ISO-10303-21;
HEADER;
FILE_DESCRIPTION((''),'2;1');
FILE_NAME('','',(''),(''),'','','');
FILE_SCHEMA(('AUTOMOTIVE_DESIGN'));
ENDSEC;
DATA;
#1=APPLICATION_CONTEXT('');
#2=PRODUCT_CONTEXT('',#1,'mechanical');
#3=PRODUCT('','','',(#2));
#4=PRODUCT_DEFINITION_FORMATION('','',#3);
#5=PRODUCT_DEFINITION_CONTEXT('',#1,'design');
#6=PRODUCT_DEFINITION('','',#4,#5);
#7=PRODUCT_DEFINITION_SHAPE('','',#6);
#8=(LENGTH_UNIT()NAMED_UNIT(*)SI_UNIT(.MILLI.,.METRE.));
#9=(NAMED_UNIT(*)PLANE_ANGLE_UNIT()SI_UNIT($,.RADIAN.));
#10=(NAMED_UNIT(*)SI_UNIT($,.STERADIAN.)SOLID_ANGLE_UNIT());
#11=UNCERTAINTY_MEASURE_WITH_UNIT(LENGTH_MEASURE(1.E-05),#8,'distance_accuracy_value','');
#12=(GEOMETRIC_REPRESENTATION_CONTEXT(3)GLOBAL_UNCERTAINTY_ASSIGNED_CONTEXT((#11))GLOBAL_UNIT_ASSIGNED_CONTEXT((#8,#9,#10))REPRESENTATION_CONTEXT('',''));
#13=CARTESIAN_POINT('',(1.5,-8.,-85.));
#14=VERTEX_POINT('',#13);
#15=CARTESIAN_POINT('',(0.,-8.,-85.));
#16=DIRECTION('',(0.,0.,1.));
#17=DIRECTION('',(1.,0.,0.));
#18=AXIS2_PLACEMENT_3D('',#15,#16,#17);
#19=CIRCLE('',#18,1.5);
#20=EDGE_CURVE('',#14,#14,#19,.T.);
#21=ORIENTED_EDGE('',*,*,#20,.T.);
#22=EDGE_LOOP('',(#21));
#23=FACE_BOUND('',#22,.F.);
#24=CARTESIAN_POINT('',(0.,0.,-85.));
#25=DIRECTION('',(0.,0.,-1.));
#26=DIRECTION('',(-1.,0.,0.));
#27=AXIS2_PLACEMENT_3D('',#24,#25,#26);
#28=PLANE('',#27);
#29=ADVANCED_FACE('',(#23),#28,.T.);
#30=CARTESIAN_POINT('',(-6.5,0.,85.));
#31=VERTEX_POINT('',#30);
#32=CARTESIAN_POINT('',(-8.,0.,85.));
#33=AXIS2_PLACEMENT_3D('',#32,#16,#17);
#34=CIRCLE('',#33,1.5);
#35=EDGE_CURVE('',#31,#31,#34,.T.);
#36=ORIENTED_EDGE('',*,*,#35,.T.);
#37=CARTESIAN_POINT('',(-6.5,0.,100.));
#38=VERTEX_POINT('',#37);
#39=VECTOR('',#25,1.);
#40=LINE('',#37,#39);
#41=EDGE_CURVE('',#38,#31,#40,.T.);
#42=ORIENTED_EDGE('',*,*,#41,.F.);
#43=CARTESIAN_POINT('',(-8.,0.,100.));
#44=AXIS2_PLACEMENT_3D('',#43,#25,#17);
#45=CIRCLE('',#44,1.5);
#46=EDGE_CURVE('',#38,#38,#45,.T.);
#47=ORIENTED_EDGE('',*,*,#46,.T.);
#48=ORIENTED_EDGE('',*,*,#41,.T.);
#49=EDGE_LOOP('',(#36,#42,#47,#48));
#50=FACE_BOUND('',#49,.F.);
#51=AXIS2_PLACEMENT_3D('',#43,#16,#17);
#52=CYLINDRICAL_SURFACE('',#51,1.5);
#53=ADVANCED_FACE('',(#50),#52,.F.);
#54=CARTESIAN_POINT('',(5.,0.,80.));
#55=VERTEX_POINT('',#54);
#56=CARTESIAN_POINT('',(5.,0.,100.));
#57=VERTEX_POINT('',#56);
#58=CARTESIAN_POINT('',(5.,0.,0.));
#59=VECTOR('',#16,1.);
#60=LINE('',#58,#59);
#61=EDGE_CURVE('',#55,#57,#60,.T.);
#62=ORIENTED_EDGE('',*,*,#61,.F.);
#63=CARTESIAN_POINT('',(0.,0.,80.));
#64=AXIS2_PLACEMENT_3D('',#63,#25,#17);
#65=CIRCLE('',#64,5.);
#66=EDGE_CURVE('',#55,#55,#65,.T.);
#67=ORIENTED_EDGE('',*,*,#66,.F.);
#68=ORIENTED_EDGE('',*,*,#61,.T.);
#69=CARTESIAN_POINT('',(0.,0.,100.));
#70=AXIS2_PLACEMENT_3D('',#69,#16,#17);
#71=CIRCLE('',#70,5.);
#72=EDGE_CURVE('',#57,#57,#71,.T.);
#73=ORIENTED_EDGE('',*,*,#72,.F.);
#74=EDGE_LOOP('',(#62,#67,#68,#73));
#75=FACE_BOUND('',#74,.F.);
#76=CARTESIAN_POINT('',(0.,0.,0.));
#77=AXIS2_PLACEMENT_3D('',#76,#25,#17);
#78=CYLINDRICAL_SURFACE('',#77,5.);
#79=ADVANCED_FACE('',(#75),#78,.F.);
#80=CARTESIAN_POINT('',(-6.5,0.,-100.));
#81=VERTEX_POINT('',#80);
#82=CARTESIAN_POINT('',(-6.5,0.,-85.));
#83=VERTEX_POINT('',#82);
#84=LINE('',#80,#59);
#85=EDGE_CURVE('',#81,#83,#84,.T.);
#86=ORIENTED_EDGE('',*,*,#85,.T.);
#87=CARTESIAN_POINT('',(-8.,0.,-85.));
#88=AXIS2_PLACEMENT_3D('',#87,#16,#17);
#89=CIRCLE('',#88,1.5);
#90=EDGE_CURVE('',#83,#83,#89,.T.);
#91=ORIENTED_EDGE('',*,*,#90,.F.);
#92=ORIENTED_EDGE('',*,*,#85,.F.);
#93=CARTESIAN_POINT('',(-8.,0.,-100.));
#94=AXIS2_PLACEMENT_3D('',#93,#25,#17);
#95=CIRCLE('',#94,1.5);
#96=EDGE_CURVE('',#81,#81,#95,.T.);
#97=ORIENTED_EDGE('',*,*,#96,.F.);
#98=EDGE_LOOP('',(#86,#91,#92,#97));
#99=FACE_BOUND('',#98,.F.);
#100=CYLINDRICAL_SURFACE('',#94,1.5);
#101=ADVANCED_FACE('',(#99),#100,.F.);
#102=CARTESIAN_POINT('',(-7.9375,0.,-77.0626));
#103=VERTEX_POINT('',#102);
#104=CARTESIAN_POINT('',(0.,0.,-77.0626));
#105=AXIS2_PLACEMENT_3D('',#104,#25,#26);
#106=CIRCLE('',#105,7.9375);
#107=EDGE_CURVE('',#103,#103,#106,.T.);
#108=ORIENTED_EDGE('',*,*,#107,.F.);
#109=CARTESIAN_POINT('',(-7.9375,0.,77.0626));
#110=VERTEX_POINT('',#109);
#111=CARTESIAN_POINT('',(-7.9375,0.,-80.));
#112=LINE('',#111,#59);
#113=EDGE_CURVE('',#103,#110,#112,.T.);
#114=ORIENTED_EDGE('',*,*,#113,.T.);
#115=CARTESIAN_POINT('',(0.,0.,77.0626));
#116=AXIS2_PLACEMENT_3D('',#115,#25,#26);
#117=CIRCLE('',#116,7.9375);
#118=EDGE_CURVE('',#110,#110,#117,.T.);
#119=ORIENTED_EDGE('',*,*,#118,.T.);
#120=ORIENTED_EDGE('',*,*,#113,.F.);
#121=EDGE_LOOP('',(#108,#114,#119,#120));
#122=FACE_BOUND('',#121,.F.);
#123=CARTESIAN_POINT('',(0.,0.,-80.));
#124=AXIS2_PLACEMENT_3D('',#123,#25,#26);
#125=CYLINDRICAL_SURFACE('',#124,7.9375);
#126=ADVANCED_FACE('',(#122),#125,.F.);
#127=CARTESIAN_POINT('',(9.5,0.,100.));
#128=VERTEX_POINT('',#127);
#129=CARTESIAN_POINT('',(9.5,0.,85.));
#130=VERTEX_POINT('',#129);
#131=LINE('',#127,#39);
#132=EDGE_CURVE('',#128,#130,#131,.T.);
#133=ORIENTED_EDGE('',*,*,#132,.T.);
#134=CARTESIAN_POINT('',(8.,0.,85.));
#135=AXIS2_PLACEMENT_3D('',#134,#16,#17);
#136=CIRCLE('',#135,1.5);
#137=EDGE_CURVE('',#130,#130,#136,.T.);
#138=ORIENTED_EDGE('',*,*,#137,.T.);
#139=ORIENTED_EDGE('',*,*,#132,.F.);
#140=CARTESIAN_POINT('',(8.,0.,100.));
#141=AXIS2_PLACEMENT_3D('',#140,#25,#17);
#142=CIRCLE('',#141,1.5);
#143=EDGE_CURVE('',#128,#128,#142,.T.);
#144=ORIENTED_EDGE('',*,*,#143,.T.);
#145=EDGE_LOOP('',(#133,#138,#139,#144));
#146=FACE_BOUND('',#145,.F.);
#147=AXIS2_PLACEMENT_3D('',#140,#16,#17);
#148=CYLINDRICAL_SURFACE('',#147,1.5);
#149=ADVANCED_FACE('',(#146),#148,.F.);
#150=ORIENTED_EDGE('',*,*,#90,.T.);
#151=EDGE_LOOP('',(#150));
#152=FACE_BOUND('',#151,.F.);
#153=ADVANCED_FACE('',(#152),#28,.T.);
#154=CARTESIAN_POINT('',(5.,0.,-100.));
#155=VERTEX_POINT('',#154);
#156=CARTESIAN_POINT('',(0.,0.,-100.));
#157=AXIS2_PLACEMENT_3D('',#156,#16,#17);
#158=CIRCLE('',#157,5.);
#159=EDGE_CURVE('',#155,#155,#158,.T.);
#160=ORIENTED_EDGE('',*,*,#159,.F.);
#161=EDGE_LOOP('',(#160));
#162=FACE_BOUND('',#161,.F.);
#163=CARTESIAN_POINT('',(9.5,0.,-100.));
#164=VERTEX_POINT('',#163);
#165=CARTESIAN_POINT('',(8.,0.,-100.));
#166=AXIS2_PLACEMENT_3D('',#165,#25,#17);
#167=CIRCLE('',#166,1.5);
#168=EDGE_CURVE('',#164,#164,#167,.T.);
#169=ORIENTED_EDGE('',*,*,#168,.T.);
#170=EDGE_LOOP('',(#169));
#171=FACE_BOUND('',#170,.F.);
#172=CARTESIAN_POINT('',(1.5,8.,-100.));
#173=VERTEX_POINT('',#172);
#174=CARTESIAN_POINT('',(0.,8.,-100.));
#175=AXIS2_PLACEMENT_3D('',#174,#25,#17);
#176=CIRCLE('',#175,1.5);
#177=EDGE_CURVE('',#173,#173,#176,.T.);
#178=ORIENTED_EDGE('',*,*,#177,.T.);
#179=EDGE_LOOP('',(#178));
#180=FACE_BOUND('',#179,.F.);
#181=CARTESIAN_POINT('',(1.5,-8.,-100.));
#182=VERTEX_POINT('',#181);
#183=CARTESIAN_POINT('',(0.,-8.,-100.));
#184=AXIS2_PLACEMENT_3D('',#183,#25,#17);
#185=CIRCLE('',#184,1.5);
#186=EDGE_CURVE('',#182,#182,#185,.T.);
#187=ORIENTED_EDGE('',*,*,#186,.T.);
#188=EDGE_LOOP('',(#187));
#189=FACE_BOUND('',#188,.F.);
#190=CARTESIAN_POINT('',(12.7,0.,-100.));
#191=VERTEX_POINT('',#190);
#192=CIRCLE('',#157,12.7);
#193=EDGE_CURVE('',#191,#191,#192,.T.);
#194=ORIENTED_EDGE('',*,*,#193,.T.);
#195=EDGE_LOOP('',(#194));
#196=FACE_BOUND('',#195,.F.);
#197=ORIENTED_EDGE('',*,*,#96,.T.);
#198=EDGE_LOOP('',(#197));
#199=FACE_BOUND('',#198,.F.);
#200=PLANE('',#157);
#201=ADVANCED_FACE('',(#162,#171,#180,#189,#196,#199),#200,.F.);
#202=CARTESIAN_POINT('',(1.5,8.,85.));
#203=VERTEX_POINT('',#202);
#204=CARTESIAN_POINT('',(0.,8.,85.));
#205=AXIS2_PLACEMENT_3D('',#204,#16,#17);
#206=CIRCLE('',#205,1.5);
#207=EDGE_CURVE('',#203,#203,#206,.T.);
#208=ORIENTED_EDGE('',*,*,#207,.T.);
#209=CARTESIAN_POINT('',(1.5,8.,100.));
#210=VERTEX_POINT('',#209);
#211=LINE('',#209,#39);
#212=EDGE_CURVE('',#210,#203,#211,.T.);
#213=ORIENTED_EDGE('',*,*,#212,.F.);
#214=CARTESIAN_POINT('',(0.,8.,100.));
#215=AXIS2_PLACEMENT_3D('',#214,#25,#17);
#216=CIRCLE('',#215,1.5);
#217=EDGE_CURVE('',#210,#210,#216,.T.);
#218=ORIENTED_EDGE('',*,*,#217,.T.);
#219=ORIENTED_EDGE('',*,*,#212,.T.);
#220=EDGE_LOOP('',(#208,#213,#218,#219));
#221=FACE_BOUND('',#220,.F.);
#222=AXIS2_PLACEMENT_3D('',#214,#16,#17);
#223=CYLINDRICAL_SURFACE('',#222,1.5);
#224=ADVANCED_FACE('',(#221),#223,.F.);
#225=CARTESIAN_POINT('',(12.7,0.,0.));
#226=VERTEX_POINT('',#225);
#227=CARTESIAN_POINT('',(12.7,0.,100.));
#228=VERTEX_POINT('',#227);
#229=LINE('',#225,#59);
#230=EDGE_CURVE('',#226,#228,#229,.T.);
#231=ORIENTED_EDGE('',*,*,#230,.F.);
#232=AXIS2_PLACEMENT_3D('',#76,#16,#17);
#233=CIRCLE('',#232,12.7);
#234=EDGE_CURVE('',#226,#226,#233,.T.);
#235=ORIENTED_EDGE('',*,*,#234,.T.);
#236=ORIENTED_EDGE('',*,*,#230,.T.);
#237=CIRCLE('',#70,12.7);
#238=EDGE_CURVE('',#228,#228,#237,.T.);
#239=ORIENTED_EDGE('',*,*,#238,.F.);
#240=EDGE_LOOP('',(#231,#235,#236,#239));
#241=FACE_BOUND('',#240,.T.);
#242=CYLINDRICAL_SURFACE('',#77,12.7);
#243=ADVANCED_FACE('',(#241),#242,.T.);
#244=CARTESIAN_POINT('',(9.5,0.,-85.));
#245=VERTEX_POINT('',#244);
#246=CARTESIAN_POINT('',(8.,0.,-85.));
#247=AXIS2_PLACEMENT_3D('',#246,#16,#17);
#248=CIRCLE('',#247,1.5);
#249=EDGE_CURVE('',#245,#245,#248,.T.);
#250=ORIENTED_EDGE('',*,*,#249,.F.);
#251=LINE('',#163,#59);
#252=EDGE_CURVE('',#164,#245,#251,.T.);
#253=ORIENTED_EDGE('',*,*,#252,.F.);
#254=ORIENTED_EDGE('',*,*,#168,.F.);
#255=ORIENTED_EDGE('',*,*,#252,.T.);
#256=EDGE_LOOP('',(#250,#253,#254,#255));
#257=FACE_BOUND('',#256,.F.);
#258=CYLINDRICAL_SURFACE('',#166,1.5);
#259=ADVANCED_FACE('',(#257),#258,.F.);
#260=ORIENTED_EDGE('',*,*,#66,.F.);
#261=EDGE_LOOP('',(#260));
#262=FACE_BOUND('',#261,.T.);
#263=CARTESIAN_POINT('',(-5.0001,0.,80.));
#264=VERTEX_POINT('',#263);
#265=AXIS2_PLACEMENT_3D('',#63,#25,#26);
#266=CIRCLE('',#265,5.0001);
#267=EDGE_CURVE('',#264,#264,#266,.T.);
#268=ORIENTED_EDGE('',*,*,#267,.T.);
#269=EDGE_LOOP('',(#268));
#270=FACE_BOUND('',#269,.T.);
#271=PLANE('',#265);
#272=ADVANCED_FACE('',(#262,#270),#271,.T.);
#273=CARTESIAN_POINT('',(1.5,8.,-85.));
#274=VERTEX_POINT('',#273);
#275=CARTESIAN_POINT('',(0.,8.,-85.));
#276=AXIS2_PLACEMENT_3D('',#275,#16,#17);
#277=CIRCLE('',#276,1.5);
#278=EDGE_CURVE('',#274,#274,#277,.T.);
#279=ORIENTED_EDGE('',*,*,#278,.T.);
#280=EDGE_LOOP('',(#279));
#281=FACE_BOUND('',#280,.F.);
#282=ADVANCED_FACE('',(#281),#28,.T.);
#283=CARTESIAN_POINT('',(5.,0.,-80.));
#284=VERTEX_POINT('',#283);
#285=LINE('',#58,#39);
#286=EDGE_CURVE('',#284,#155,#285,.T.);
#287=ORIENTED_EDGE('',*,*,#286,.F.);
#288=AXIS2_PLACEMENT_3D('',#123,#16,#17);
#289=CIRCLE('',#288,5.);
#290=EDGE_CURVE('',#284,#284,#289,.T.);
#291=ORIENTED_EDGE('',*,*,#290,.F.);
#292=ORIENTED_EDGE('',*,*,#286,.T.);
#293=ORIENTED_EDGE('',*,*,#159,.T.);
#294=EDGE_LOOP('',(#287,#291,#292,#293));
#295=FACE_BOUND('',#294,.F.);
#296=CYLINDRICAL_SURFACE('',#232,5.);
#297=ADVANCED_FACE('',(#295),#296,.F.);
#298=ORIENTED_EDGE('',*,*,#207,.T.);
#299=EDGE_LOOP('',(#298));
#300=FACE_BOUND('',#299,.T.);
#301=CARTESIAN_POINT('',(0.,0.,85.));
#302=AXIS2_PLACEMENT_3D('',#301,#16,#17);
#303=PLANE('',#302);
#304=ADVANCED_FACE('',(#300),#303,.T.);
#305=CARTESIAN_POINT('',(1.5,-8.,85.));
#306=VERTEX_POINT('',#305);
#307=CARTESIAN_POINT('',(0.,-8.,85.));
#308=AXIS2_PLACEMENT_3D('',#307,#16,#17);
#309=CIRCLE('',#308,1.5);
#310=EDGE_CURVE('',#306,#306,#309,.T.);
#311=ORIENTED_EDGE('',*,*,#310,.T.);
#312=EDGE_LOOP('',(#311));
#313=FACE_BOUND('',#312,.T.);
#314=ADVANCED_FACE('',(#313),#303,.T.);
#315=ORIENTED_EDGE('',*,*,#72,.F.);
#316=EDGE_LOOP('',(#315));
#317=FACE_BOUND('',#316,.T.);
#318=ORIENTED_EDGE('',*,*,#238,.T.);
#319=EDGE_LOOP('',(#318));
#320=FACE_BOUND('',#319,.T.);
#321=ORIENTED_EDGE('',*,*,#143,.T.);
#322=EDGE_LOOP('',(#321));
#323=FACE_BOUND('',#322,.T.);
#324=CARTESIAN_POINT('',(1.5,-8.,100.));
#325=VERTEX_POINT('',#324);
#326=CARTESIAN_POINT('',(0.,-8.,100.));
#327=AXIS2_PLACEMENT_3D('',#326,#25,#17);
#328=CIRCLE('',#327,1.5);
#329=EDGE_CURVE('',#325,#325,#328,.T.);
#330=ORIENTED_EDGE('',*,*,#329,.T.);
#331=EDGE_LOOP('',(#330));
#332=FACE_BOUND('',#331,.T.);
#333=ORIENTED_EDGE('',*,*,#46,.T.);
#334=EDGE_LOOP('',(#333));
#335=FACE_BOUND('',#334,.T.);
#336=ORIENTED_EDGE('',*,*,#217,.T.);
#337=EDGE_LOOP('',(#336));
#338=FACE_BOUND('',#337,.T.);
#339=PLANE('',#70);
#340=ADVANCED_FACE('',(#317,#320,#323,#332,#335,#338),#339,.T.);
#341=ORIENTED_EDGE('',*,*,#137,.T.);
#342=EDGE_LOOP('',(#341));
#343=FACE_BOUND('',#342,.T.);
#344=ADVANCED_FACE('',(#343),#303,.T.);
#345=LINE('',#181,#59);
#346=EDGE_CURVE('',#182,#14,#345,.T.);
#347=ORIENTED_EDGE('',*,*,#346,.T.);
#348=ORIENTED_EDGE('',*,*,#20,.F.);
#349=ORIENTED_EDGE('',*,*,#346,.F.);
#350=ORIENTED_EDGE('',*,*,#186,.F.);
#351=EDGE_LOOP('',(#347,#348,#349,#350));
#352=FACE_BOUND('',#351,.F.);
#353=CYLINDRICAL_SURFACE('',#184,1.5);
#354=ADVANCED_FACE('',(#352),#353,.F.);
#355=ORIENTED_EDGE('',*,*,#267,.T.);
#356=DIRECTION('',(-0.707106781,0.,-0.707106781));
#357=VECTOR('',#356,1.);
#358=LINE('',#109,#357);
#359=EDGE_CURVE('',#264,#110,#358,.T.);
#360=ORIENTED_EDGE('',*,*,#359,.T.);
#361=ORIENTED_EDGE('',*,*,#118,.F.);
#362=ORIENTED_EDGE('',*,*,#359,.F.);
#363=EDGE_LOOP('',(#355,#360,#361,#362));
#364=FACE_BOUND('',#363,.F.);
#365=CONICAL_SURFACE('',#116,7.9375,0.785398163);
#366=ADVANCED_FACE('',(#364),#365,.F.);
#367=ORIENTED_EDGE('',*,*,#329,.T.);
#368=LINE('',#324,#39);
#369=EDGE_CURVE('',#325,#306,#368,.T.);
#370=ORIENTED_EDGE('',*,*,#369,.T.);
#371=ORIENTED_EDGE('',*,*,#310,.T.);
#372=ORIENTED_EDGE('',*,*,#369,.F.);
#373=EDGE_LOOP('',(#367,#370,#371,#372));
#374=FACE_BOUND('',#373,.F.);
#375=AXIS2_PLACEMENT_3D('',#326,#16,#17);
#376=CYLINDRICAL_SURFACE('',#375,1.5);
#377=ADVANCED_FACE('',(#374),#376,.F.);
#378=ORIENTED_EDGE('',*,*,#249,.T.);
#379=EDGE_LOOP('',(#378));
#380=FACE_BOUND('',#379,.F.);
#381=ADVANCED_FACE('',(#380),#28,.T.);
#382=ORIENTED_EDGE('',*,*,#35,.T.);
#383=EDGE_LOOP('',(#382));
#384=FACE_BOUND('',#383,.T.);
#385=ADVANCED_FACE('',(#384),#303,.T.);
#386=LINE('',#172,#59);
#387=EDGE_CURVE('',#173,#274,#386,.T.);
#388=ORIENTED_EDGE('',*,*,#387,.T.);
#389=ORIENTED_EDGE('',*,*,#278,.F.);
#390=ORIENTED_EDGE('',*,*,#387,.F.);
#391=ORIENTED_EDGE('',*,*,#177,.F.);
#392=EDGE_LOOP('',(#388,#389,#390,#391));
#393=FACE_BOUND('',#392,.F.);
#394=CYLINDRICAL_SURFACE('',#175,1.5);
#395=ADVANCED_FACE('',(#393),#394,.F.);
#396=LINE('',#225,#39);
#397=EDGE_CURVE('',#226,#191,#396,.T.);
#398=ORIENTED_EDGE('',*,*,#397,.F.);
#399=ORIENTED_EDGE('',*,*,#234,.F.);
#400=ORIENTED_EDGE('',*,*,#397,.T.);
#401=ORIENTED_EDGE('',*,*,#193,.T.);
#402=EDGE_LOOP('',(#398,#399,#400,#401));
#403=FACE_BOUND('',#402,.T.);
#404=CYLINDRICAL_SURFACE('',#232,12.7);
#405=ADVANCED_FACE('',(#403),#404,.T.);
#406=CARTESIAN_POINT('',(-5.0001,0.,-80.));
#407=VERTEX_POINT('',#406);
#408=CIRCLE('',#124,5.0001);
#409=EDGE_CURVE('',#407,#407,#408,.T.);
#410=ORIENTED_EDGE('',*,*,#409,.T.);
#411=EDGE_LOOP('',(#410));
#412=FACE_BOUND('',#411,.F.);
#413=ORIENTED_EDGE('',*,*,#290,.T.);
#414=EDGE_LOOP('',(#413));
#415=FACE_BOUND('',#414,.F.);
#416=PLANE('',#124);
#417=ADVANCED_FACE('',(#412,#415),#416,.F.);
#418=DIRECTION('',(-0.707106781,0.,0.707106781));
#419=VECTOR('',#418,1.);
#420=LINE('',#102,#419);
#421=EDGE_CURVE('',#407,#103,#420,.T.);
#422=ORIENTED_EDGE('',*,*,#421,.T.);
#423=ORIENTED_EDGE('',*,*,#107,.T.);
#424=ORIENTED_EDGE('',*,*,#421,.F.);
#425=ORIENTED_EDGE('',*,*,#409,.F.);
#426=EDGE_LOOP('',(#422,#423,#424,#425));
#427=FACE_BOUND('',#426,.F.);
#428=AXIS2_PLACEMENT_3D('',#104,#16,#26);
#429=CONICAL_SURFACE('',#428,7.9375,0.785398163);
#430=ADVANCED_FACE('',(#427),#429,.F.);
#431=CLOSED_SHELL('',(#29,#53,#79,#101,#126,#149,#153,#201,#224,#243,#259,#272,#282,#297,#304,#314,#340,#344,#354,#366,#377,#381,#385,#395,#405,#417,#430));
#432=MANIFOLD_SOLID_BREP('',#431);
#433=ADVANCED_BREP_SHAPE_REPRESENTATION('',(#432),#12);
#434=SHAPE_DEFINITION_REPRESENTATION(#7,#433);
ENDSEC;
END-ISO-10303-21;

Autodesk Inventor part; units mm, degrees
ref_plane "YZ Plane" through (0, 0, 0) normal (1, 0, 0) x (0, 1, 0)
ref_plane "XZ Plane" through (0, 0, 0) normal (0, 1, 0) x (-1, 0, 0)
sketch "Sketch1" plane through (0, 0, 0) normal (0, 0, 1) x (1, 0, 0)
  circle A0 centre (0, 0) radius 12.7
  circle A1 centre (0, 0) radius 5
  dimension "d0" = 25.4
  dimension "d1" = 10
extrude "Extrusion1" add sketch "Sketch1" along normal mid plane 200
sketch "Sketch2" plane through (0, 0, 100) normal (0, 0, 1) x (1, 0, 0)
  line L0 (-17.78, 0) -> (17.78, 0) projected
  line L1 (0, -17.78) -> (0, 17.78) projected
  circle A0 centre (0, 0) radius 8 construction
  line L2 (0, 0) -> (8, 0) construction
  circle A1 centre (0, 8) radius 1.5
  circle A2 centre (-8, 0) radius 1.5
  circle A3 centre (0, -8) radius 1.5
  circle A4 centre (8, 0) radius 1.5
  point P0 (8, 0)
  point P1 (0, -8)
  point P2 (-8, 0)
  dimension "d4" = 16
  dimension "d25" = 3
  dimension "d28" = 360
extrude "Extrusion3" cut sketch "Sketch2" against normal blind 15
thread "Thread1" size "M3x0.5" class "6H" standard "ANSI Metric M Profile" full length
thread "Thread2" size "M3x0.5" class "6H" standard "ANSI Metric M Profile" full length
thread "Thread3" size "M3x0.5" class "6H" standard "ANSI Metric M Profile" full length
thread "Thread4" size "M3x0.5" class "6H" standard "ANSI Metric M Profile" full length
mirror "Mirror2" about plane through (0, 0, 0) normal (0, 0, 1) of "Extrusion3"
thread "Thread5" size "M3x0.5" class "6H" standard "ANSI Metric M Profile" full length
thread "Thread6" size "M3x0.5" class "6H" standard "ANSI Metric M Profile" full length
thread "Thread7" size "M3x0.5" class "6H" standard "ANSI Metric M Profile" full length
thread "Thread8" size "M3x0.5" class "6H" standard "ANSI Metric M Profile" full length
ref_plane "Work Plane1" through (0, 0, -80) normal (0, 0, -1) x (-1, 0, 0)
sketch "Sketch3" plane through (0, 0, -80) normal (0, 0, -1) x (-1, 0, 0)
  circle A0 centre (0, 0) radius 7.9375
  dimension "d49" = 15.875
extrude "Extrusion4" cut sketch "Sketch3" against normal blind 160
chamfer "Chamfer3" distance 2.9375 angle 45 2 edges at (7.9375, 0, 80) (7.9375, 0, -80)
properties part number "barra solida hueca para imprimir 3D"
